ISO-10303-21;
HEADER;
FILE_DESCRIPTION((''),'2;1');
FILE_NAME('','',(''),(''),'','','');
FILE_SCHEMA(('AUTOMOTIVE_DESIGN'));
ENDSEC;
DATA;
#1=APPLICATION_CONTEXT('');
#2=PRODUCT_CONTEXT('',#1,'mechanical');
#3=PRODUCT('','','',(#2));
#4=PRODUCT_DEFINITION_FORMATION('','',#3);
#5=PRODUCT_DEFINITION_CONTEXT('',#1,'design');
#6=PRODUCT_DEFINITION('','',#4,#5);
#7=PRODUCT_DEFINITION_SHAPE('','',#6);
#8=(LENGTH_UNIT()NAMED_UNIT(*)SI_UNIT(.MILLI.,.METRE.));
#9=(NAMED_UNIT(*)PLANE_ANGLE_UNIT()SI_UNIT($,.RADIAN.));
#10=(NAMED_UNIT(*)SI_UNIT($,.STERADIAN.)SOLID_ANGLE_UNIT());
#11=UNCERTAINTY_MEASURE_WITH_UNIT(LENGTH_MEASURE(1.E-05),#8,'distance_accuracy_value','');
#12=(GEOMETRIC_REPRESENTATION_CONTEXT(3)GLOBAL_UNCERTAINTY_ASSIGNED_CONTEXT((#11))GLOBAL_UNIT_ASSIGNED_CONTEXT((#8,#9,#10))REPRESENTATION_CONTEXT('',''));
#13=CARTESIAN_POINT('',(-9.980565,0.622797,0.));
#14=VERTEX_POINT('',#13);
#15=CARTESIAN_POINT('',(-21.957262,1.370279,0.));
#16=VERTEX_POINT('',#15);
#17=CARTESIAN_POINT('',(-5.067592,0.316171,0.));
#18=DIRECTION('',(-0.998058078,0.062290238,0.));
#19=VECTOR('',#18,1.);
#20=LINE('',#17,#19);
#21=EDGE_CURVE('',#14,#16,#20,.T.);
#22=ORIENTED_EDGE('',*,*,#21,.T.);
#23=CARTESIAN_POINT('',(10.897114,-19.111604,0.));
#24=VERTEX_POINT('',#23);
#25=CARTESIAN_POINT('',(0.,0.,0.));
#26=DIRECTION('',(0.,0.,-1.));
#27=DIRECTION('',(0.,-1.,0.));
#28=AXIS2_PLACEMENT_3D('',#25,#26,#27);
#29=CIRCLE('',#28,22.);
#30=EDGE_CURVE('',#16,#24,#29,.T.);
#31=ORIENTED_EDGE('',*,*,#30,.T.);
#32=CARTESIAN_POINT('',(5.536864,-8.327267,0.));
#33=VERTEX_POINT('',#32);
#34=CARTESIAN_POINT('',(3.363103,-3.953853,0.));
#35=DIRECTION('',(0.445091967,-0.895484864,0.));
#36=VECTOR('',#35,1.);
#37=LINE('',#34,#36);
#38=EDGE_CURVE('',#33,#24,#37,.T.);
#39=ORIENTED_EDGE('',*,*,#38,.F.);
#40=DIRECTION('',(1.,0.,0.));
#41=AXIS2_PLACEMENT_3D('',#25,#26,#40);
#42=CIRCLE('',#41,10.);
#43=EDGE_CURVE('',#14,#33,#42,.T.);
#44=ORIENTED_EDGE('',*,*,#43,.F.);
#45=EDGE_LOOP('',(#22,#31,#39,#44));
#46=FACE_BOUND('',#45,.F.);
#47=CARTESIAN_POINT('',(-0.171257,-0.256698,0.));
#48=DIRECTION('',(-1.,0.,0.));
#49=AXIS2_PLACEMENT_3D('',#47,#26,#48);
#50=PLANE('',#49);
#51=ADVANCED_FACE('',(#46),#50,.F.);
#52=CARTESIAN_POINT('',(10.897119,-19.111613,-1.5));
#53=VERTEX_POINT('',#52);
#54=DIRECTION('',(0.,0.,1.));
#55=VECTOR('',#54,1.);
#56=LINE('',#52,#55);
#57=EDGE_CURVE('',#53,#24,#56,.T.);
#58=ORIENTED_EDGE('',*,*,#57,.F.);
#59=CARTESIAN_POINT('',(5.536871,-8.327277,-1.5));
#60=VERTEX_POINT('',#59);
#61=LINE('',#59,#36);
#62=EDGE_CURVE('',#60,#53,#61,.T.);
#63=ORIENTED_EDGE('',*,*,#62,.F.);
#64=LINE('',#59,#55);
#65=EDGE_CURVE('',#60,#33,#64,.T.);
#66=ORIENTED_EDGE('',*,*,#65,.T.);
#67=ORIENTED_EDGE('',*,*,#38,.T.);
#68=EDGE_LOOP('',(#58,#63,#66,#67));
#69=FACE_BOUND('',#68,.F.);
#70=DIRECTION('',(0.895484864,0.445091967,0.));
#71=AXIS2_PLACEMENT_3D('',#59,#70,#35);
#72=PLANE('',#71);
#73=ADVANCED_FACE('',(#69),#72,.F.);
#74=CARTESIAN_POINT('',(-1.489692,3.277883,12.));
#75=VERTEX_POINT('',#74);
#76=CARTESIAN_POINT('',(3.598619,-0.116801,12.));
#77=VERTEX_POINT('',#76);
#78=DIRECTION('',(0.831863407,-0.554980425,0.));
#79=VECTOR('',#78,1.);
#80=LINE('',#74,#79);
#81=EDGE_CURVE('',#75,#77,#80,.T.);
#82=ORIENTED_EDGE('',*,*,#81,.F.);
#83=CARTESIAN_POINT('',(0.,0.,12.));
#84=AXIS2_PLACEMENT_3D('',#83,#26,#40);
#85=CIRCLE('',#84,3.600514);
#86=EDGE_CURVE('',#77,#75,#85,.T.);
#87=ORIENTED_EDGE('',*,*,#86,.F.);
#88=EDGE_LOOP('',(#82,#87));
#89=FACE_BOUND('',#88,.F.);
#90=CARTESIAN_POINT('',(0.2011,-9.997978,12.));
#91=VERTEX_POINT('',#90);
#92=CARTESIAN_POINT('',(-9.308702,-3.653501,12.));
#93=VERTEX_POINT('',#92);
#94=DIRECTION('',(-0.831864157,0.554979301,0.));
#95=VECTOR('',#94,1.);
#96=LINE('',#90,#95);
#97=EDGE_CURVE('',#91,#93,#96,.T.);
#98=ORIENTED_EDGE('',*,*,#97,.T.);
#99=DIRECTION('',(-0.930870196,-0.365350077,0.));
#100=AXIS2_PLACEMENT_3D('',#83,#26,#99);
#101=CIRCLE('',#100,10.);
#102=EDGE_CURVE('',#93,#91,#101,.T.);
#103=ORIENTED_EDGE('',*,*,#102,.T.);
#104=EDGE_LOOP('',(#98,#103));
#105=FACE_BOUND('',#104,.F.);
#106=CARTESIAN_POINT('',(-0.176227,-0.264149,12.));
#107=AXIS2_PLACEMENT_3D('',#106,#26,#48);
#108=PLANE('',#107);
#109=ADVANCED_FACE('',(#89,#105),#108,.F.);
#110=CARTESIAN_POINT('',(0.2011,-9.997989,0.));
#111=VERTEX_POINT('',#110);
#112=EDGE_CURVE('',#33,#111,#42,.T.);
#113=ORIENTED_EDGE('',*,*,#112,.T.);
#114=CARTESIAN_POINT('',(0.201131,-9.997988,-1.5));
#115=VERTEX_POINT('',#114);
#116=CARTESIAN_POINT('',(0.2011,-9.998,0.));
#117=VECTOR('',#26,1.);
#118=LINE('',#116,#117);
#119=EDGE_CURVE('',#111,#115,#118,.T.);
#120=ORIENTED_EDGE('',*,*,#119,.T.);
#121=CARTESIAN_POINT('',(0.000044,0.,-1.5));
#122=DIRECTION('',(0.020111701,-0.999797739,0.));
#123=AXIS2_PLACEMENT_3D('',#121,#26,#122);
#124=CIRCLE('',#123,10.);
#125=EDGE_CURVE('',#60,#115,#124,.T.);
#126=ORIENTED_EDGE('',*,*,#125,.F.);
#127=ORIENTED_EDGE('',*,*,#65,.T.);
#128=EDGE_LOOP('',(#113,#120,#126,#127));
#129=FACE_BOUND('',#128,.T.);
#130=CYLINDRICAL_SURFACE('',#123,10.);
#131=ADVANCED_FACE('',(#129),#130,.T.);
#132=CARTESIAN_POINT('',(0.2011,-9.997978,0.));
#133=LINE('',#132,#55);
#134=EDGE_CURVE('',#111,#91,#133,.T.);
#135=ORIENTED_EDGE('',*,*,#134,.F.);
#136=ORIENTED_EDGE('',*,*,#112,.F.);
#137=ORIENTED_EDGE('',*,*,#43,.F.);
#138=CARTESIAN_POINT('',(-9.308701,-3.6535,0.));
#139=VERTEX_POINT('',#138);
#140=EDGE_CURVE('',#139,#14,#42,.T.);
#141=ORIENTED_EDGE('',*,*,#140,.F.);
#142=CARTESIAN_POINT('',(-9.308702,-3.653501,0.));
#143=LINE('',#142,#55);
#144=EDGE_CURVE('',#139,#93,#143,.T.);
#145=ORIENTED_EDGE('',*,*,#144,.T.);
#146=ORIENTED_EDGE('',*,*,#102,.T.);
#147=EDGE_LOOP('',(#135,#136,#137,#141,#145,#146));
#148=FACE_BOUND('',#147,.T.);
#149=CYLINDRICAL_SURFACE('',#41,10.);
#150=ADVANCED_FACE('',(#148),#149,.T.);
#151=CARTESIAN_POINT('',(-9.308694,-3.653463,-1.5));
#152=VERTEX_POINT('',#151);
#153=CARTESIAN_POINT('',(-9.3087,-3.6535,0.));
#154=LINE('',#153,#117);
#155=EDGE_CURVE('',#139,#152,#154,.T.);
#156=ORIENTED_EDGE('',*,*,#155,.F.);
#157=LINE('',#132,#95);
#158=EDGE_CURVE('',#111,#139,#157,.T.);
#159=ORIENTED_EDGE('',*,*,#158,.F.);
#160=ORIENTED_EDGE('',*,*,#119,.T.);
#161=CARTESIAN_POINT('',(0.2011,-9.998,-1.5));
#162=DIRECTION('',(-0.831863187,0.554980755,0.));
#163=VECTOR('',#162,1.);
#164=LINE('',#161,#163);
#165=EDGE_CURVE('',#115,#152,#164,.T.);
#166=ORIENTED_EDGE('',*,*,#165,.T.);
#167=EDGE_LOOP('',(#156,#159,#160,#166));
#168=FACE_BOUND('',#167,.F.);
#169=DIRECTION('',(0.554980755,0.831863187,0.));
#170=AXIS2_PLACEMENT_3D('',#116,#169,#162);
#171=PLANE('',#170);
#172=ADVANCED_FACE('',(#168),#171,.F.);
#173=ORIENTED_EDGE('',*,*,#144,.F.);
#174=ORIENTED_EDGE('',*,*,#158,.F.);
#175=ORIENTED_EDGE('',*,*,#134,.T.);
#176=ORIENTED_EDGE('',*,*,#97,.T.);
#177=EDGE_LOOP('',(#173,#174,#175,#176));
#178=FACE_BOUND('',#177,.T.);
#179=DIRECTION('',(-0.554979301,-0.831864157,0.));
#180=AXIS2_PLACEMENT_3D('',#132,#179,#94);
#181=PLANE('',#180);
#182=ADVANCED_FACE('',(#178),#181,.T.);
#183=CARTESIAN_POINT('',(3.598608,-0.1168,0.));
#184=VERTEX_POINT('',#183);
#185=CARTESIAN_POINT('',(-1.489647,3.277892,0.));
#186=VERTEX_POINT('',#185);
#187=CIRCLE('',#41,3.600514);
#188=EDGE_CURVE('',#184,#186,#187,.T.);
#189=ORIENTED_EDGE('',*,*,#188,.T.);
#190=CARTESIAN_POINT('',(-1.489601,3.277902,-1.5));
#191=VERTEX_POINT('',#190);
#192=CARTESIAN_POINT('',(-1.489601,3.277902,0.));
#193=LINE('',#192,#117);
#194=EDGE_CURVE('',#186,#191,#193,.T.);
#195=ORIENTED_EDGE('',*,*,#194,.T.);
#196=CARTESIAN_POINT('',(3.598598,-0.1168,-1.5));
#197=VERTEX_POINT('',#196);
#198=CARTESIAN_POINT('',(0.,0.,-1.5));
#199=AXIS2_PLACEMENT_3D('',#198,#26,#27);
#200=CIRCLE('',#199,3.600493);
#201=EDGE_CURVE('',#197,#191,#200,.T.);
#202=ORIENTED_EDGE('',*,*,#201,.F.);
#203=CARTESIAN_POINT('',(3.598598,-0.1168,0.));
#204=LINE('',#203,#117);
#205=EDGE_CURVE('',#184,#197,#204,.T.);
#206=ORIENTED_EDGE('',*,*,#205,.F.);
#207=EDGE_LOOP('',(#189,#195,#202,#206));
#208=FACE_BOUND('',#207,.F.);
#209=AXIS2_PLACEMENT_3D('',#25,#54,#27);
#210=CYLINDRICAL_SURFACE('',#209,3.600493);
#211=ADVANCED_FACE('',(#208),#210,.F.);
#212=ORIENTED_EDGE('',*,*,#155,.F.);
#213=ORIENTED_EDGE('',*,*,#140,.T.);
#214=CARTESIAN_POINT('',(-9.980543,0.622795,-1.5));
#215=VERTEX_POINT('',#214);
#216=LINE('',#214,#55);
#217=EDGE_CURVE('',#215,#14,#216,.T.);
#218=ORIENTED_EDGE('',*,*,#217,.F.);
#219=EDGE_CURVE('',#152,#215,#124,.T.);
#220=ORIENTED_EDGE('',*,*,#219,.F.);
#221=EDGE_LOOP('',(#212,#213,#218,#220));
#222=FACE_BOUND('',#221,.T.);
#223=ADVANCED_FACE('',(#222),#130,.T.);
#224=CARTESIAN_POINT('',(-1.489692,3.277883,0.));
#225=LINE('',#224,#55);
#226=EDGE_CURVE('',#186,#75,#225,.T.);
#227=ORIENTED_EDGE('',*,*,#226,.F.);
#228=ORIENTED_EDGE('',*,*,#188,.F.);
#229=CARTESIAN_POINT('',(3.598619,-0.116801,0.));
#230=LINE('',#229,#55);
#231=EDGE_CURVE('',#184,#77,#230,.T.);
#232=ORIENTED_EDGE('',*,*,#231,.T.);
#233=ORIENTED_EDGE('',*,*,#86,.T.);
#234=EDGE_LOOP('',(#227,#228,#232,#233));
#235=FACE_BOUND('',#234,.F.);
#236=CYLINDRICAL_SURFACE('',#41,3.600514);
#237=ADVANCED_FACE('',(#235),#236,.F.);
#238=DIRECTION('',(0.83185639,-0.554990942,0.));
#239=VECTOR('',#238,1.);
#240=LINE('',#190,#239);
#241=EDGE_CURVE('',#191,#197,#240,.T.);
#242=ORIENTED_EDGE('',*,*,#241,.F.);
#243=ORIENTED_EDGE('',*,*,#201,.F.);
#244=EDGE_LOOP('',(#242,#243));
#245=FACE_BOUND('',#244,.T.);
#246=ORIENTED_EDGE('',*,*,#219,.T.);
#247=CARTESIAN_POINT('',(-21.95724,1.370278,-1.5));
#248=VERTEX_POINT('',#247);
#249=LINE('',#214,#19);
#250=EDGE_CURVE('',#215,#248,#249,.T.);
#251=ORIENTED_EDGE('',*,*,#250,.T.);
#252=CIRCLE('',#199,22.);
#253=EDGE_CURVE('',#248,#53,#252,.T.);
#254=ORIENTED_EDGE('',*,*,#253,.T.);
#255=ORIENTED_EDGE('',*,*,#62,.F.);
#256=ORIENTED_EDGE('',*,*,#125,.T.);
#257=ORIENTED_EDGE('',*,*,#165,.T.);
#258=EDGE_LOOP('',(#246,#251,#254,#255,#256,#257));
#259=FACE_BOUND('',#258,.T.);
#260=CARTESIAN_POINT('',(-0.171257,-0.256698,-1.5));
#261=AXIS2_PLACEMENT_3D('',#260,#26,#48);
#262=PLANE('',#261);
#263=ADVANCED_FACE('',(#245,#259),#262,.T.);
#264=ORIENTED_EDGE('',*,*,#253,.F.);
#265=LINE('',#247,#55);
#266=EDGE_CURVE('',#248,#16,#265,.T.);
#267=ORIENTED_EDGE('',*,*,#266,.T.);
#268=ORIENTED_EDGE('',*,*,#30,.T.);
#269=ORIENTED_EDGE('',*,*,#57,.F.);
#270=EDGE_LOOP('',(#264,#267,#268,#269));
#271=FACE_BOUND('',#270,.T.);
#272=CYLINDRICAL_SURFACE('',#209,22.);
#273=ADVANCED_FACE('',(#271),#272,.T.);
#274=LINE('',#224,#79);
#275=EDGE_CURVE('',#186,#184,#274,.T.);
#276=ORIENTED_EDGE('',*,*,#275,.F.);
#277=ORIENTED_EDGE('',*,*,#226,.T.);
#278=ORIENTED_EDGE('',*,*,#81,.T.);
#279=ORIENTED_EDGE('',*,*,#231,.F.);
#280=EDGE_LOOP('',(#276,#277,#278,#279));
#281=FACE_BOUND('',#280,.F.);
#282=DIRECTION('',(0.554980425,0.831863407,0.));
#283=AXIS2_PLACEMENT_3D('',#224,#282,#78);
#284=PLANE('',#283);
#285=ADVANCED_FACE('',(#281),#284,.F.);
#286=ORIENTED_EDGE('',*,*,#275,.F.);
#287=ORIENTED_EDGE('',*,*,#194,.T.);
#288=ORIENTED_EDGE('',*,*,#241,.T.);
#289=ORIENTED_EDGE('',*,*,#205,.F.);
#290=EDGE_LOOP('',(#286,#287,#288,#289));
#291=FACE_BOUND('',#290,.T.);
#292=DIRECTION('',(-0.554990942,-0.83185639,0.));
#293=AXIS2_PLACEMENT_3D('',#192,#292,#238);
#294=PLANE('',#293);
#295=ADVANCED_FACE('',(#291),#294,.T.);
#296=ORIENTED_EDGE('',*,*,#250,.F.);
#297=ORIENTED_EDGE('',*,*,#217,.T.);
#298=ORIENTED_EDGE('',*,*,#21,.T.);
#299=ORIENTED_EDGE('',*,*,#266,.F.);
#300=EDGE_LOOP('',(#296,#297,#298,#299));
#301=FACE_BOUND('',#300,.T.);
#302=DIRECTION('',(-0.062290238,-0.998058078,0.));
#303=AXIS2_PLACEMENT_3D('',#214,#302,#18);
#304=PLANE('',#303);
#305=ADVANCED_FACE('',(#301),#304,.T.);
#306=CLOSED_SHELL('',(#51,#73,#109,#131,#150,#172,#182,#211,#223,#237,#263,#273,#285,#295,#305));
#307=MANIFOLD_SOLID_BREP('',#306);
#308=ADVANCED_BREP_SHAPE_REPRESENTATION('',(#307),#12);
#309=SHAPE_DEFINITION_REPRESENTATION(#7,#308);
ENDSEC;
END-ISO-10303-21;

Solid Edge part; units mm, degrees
sketch "Sketch1" plane through (0, 0, 0) normal (0, 0, 1) x (1, 0, 0)
  line L0 (0.2011, -9.998) -> (-9.3087, -3.6535)
  arc A0 (-9.3087, -3.6535) -> (0.2011, -9.998) centre (0, 0) cw
  line L1 (-1.4897, 3.2779) -> (3.5986, -0.1168)
  arc A1 (3.5986, -0.1168) -> (-1.4897, 3.2779) centre (0, 0) cw
extrude "Protrusion1" add sketch "Sketch1" along normal blind 12
sketch "Sketch2" plane through (-0.8973, 0, 0) normal (0, 0, -1) x (0, -1, 0)
  line L0 (9.998, -1.0984) -> (3.6535, 8.4114)
  line L1 (3.6535, 8.4114) -> (8.0376, 19.5818)
  line L2 (9.998, -1.0984) -> (21.9956, -1.3398)
  arc A0 (8.0376, 19.5818) -> (21.9956, -1.3398) centre (0, -0.8973) ccw
  arc A1 (0.1168, -4.4959) -> (-3.2779, 0.5923) centre (0, -0.8973) ccw
  line L3 (-3.2779, 0.5923) -> (0.1168, -4.4959)
extrude "ExtrudedProtrusion_2" add sketch "Sketch2" along normal blind 1.5
sketch "Sketch3" plane through (0, 0.0022, -1.5) normal (0, 0, -1) x (0.0201117, -0.9997977, 0)
  arc A0 (8.4391, -5.3682) -> (10.0022, 0) centre (0.0022, 0) ccw
  line L0 (10.0022, 0) -> (3.4677, 9.3804)
  arc A1 (3.4677, 9.3804) -> (-0.8212, 9.9661) centre (0.0022, 0) ccw
  line L1 (-0.8212, 9.9661) -> (-1.8094, 21.9253)
  arc A2 (-1.8094, 21.9253) -> (19.3291, -10.5105) centre (0.0022, 0) cw
  line L2 (8.4391, -5.3682) -> (19.3291, -10.5105)
extrude "ExtrudedCutout_1" cut sketch "Sketch3" against normal blind 22.4982
